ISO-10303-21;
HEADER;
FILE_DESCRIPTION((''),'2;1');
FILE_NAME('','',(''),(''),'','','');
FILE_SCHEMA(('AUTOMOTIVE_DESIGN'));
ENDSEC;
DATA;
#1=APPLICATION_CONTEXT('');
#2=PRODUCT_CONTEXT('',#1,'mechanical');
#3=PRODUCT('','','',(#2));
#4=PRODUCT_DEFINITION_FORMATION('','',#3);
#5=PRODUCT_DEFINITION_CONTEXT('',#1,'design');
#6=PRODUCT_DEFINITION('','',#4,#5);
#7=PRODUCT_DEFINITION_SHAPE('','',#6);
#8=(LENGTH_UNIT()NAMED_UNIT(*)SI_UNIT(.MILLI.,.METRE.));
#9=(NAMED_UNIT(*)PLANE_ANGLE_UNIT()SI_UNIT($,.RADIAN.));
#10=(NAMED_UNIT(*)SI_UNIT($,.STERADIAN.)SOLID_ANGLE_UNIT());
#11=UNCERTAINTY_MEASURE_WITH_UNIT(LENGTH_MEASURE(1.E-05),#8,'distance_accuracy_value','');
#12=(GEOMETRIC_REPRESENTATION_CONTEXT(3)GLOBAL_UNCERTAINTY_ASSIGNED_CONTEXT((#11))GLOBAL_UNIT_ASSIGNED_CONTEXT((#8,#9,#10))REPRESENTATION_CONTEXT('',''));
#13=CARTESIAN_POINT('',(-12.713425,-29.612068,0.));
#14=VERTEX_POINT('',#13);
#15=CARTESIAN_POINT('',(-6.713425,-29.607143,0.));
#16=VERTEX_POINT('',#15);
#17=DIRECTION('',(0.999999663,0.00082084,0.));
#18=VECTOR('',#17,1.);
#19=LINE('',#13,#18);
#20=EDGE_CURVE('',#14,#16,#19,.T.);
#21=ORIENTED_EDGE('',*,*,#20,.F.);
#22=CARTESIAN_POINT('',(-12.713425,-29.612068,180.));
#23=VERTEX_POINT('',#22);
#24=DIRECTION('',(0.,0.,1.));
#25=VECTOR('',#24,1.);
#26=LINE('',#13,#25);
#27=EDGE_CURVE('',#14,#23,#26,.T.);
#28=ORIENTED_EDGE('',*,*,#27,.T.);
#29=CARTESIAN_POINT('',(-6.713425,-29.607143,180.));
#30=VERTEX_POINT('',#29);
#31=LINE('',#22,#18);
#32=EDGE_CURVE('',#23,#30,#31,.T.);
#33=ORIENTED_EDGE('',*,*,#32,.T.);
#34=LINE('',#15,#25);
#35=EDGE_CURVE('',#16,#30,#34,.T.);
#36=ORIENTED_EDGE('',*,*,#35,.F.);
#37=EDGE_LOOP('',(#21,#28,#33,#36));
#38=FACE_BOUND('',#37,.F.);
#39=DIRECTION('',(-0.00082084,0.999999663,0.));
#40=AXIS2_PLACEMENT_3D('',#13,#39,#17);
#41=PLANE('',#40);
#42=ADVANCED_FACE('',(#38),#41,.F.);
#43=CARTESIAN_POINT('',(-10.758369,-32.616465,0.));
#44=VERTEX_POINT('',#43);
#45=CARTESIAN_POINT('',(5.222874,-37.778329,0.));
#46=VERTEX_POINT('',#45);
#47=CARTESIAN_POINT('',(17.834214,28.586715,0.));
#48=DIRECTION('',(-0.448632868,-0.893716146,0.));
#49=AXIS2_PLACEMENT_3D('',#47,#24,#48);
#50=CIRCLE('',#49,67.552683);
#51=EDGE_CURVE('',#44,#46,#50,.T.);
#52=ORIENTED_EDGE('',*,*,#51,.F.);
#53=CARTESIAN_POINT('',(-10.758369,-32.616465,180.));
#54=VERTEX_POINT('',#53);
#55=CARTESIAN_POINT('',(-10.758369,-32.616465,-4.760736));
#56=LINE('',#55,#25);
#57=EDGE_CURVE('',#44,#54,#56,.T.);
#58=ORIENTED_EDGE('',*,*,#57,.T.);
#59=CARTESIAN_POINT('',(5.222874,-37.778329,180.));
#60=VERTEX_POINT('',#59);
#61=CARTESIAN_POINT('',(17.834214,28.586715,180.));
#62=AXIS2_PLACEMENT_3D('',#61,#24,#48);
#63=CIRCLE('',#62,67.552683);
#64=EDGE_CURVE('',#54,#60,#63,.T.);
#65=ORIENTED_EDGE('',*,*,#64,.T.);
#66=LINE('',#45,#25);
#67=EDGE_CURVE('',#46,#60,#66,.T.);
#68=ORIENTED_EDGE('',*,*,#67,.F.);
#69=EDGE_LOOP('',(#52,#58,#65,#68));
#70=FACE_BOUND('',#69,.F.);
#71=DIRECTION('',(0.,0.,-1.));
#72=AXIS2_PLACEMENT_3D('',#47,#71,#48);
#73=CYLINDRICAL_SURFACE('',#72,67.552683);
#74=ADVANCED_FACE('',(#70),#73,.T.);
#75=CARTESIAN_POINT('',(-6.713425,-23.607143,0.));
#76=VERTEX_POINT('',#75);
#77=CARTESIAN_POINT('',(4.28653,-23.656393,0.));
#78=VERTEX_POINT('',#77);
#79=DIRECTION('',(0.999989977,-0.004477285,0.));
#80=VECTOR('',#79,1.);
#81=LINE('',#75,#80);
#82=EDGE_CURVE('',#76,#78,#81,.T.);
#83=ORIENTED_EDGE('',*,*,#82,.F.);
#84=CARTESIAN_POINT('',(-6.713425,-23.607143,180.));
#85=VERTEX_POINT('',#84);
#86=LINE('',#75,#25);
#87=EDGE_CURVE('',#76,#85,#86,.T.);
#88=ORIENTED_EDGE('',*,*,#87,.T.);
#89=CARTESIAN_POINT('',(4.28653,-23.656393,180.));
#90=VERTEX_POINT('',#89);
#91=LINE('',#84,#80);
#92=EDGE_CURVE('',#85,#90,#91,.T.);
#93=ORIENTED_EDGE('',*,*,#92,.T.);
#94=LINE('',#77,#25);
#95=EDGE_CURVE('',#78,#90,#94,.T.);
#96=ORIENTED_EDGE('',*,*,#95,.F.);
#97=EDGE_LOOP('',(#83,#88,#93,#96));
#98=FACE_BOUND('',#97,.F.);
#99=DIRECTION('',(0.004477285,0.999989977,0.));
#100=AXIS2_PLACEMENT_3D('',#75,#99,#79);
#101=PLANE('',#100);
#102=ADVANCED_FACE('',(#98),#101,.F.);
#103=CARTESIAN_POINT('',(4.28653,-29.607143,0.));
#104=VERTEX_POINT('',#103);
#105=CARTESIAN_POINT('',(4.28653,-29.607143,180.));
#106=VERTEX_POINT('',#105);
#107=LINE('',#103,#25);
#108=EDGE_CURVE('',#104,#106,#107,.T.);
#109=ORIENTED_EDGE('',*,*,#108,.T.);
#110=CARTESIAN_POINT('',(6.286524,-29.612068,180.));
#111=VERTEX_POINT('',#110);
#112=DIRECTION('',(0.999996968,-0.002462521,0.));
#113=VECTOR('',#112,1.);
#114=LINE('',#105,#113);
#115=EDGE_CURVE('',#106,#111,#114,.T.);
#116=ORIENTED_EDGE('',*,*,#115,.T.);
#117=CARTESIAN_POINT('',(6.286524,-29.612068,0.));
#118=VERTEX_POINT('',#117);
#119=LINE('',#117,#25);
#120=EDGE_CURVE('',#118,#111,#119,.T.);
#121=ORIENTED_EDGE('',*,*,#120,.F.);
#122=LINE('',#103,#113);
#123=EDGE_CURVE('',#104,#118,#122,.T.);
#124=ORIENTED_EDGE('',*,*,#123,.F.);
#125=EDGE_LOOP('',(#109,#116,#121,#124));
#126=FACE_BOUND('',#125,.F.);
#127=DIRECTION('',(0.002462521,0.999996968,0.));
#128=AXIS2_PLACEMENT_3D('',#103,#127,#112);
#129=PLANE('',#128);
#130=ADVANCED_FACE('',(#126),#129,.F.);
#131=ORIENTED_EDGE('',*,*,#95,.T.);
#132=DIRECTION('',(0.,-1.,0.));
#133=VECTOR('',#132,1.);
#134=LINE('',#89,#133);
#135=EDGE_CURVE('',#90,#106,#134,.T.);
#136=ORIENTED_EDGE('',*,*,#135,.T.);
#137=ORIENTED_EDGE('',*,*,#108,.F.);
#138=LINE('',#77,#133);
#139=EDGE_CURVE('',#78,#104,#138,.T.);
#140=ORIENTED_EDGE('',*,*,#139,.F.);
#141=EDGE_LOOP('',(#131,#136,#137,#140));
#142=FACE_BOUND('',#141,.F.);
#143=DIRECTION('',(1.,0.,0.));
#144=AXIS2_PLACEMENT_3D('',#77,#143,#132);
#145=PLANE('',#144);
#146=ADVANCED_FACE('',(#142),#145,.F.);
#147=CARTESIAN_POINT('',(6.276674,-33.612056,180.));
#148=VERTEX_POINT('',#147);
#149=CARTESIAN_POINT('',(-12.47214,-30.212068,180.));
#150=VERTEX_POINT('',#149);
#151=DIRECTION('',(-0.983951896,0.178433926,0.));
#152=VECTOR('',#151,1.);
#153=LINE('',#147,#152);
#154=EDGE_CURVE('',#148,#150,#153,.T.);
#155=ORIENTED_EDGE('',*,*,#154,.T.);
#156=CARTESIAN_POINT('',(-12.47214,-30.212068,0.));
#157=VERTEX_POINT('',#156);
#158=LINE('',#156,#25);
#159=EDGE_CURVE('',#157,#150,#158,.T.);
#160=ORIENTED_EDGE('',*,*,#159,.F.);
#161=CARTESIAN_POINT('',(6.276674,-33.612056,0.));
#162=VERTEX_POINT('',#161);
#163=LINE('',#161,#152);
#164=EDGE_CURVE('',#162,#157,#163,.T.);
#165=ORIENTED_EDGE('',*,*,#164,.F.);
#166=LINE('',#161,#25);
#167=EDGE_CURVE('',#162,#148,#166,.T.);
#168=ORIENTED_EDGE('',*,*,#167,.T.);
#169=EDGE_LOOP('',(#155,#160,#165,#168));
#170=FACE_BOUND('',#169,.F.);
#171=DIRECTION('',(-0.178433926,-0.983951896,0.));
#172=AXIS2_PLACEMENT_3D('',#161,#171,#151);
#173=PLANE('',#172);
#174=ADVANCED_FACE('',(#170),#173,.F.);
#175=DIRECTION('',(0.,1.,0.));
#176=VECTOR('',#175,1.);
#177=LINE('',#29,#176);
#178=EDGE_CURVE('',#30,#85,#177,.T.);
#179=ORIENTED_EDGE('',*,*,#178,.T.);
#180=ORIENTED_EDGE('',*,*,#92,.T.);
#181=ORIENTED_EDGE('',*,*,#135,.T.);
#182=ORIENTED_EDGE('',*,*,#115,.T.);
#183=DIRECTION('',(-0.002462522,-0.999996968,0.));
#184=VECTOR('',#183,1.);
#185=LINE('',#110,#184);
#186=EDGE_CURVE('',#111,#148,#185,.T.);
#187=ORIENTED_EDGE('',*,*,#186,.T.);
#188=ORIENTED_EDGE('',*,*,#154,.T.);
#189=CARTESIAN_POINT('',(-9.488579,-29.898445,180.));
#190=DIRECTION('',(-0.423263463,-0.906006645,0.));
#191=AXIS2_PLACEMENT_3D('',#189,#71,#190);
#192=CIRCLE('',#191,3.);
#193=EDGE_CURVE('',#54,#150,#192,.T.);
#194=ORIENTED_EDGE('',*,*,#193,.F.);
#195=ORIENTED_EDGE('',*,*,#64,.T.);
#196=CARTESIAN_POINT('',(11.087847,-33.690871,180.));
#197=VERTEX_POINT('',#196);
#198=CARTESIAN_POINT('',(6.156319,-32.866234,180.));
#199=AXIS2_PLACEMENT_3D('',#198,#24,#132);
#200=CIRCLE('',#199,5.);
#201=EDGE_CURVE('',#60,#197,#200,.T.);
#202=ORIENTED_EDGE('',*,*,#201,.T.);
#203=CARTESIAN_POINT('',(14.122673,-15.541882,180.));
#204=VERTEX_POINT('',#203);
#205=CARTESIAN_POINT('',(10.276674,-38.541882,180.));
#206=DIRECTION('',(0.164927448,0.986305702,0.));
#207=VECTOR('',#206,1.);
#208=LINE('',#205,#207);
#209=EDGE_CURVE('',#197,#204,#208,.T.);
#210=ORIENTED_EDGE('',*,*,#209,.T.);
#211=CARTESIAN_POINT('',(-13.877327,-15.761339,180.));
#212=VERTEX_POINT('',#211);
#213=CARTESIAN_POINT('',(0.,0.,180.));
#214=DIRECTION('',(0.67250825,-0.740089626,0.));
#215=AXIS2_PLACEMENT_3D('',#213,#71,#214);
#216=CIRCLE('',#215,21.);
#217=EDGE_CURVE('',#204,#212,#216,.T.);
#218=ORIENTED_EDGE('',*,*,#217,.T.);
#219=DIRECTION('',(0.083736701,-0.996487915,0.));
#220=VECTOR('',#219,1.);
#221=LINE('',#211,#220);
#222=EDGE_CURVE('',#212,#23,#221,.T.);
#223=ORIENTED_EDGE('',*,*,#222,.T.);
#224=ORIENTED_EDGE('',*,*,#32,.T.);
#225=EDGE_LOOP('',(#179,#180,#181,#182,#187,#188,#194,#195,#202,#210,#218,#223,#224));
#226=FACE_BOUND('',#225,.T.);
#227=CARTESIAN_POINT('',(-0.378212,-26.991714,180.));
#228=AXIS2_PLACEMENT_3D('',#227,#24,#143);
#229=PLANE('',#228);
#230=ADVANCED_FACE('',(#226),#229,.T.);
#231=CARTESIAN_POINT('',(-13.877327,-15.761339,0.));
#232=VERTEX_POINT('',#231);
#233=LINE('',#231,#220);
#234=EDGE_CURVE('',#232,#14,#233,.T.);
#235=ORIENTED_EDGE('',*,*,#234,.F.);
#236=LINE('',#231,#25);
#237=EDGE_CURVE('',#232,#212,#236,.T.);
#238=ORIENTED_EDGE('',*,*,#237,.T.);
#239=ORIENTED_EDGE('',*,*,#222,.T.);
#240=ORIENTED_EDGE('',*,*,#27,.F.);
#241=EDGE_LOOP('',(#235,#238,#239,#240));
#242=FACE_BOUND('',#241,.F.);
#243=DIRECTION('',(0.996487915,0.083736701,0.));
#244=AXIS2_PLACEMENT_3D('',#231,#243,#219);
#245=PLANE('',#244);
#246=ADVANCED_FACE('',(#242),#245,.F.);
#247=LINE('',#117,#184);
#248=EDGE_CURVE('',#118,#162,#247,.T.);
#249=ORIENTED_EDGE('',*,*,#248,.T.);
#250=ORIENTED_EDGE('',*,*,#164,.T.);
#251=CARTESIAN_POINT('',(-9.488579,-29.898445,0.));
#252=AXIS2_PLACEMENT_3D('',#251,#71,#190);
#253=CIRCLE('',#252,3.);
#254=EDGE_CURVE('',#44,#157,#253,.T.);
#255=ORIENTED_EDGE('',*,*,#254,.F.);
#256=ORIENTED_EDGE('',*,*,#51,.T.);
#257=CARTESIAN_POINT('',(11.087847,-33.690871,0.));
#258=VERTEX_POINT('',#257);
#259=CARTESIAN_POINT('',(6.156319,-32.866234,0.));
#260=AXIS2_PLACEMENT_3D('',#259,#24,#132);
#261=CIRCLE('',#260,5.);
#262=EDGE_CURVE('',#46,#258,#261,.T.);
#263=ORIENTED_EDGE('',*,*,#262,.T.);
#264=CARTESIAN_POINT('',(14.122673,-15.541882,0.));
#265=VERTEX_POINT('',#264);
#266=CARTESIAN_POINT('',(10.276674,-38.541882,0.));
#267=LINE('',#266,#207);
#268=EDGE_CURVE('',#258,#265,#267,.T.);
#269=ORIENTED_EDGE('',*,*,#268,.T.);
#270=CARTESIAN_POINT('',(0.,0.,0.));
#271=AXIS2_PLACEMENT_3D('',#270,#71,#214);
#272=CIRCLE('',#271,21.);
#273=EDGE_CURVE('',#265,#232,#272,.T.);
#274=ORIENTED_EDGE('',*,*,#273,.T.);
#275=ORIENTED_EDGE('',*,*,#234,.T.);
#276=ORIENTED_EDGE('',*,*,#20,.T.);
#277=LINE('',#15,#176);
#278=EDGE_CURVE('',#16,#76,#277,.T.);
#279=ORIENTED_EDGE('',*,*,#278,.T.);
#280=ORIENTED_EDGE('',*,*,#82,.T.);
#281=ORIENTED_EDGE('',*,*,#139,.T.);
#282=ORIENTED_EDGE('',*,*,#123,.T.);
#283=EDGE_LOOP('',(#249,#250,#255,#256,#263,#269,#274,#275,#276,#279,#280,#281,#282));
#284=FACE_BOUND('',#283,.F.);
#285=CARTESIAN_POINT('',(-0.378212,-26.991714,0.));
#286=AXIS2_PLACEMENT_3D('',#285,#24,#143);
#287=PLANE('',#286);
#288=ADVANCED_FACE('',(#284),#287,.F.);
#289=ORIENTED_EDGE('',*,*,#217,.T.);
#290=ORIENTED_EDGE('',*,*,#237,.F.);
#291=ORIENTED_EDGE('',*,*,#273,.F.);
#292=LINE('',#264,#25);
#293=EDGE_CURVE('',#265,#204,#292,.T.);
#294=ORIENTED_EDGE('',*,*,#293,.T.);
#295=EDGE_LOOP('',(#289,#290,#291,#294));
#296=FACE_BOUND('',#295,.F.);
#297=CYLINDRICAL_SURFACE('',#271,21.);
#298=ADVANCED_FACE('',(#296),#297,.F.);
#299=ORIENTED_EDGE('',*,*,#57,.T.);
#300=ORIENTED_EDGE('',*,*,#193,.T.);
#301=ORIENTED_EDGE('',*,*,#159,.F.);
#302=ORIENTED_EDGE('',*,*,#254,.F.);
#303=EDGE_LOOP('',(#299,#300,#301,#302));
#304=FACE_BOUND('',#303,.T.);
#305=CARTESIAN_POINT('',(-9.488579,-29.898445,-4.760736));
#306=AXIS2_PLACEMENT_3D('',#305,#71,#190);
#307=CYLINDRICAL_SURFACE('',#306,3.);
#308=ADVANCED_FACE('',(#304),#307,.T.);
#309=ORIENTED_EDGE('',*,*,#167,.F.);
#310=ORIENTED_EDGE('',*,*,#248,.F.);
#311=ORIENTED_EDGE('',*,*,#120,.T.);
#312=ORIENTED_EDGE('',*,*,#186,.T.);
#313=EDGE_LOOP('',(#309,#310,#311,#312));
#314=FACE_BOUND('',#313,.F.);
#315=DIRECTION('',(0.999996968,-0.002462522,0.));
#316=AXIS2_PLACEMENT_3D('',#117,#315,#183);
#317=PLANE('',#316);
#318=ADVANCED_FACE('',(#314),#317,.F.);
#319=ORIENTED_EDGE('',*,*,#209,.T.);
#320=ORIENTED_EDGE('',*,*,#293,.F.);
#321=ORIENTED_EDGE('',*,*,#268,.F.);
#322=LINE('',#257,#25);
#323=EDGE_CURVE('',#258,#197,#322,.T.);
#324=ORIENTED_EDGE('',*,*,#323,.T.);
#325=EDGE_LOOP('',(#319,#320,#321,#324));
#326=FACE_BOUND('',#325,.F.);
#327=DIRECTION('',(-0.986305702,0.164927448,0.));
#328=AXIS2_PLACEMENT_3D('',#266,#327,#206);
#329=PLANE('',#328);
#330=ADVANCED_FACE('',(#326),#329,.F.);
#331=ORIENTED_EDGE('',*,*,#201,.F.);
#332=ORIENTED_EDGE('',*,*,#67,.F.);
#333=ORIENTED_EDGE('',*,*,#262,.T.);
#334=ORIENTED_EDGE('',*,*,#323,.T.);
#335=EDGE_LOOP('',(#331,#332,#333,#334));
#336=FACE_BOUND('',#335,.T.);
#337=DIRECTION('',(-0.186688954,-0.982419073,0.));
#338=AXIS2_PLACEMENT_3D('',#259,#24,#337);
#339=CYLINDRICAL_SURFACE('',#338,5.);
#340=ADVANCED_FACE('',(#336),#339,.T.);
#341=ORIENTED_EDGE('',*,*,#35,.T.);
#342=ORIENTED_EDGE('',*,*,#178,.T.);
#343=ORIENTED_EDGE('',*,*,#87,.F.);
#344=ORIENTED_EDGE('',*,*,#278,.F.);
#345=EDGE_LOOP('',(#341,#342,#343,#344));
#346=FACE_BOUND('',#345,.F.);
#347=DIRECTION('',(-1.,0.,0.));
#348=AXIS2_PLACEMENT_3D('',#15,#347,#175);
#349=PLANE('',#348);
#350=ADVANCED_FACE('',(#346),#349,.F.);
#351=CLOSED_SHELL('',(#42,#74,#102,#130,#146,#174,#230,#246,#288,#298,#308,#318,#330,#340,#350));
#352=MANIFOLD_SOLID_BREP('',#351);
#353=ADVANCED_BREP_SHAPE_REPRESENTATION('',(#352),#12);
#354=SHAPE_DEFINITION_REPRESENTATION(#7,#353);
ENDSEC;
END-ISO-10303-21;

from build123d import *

# Parameters (mm, degrees)
F1_DEPTH    = 180
F2_R        = 5
F3_T1_DEPTH = 189.5214724234


# Not quite as in the source:
# - a fillet or chamfer that OpenCascade refuses, or shapes differently, is made with other operations: its cross-section is extruded or revolved along the edge and cut away or added


with BuildPart() as f1:
    # F0 (on Top) → F1 (new body)
    with BuildSketch(Plane.XY):
        with BuildLine():
            ThreePointArc((14.1226732436, -15.5418821401), (0.1645874713, -20.9993550131), (-13.8773267564, -15.7613388421))
            Line((-13.8773267564, -15.7613388421), (-12.7134246975, -29.6120676683))
            Line((-12.7134246975, -29.6120676683), (-6.7134246975, -29.6071426253))
            Line((-6.7134246975, -29.6071426253), (-6.7134246975, -23.6071426253))
            Line((-6.7134246975, -23.6071426253), (4.2865298223, -23.6563930556))
            Line((4.2865298223, -23.6563930556), (4.2865298223, -29.6071426253))
            Line((4.2865298223, -29.6071426253), (6.2865237583, -29.6120676683))
            Line((6.2865237583, -29.6120676683), (6.2766736722, -33.6120555403))
            Line((6.2766736722, -33.6120555403), (-12.4721404439, -30.2120676683))
            Line((-12.4721404439, -30.2120676683), (-12.4721404439, -31.7862083661))
            ThreePointArc((-12.4721404439, -31.7862083661), (-1.3967093827, -36.1708063262), (10.2766736722, -38.5418821401))
            Line((10.2766736722, -38.5418821401), (14.1226732436, -15.5418821401))
        make_face()
    extrude(amount=F1_DEPTH)

    # F2
    f2_edges = [f1.edges().sort_by_distance(p)[0] for p in [
        (10.276674, -38.541882, 90),
    ]]
    fillet(f2_edges, radius=F2_R)

    # F3: fillet of radius 3 on 1 edges, made by hand

    # F3_s2 → F3_t1 (cut)
    with BuildSketch(Plane.XY.offset(-4.7607362117)):
        with BuildLine():
            ThreePointArc((-10.7583691092, -32.6164645294), (-11.9315343306, -31.6396992801), (-12.4721404439, -30.2120676683))
            Line((-12.4721404439, -30.2120676683), (-12.4721404439, -31.7862083661))
            ThreePointArc((-12.4721404439, -31.7862083661), (-11.618180513, -32.2073755998), (-10.7583691092, -32.6164645294))
        make_face()
    extrude(amount=F3_T1_DEPTH, mode=Mode.SUBTRACT)


solid = f1.part
